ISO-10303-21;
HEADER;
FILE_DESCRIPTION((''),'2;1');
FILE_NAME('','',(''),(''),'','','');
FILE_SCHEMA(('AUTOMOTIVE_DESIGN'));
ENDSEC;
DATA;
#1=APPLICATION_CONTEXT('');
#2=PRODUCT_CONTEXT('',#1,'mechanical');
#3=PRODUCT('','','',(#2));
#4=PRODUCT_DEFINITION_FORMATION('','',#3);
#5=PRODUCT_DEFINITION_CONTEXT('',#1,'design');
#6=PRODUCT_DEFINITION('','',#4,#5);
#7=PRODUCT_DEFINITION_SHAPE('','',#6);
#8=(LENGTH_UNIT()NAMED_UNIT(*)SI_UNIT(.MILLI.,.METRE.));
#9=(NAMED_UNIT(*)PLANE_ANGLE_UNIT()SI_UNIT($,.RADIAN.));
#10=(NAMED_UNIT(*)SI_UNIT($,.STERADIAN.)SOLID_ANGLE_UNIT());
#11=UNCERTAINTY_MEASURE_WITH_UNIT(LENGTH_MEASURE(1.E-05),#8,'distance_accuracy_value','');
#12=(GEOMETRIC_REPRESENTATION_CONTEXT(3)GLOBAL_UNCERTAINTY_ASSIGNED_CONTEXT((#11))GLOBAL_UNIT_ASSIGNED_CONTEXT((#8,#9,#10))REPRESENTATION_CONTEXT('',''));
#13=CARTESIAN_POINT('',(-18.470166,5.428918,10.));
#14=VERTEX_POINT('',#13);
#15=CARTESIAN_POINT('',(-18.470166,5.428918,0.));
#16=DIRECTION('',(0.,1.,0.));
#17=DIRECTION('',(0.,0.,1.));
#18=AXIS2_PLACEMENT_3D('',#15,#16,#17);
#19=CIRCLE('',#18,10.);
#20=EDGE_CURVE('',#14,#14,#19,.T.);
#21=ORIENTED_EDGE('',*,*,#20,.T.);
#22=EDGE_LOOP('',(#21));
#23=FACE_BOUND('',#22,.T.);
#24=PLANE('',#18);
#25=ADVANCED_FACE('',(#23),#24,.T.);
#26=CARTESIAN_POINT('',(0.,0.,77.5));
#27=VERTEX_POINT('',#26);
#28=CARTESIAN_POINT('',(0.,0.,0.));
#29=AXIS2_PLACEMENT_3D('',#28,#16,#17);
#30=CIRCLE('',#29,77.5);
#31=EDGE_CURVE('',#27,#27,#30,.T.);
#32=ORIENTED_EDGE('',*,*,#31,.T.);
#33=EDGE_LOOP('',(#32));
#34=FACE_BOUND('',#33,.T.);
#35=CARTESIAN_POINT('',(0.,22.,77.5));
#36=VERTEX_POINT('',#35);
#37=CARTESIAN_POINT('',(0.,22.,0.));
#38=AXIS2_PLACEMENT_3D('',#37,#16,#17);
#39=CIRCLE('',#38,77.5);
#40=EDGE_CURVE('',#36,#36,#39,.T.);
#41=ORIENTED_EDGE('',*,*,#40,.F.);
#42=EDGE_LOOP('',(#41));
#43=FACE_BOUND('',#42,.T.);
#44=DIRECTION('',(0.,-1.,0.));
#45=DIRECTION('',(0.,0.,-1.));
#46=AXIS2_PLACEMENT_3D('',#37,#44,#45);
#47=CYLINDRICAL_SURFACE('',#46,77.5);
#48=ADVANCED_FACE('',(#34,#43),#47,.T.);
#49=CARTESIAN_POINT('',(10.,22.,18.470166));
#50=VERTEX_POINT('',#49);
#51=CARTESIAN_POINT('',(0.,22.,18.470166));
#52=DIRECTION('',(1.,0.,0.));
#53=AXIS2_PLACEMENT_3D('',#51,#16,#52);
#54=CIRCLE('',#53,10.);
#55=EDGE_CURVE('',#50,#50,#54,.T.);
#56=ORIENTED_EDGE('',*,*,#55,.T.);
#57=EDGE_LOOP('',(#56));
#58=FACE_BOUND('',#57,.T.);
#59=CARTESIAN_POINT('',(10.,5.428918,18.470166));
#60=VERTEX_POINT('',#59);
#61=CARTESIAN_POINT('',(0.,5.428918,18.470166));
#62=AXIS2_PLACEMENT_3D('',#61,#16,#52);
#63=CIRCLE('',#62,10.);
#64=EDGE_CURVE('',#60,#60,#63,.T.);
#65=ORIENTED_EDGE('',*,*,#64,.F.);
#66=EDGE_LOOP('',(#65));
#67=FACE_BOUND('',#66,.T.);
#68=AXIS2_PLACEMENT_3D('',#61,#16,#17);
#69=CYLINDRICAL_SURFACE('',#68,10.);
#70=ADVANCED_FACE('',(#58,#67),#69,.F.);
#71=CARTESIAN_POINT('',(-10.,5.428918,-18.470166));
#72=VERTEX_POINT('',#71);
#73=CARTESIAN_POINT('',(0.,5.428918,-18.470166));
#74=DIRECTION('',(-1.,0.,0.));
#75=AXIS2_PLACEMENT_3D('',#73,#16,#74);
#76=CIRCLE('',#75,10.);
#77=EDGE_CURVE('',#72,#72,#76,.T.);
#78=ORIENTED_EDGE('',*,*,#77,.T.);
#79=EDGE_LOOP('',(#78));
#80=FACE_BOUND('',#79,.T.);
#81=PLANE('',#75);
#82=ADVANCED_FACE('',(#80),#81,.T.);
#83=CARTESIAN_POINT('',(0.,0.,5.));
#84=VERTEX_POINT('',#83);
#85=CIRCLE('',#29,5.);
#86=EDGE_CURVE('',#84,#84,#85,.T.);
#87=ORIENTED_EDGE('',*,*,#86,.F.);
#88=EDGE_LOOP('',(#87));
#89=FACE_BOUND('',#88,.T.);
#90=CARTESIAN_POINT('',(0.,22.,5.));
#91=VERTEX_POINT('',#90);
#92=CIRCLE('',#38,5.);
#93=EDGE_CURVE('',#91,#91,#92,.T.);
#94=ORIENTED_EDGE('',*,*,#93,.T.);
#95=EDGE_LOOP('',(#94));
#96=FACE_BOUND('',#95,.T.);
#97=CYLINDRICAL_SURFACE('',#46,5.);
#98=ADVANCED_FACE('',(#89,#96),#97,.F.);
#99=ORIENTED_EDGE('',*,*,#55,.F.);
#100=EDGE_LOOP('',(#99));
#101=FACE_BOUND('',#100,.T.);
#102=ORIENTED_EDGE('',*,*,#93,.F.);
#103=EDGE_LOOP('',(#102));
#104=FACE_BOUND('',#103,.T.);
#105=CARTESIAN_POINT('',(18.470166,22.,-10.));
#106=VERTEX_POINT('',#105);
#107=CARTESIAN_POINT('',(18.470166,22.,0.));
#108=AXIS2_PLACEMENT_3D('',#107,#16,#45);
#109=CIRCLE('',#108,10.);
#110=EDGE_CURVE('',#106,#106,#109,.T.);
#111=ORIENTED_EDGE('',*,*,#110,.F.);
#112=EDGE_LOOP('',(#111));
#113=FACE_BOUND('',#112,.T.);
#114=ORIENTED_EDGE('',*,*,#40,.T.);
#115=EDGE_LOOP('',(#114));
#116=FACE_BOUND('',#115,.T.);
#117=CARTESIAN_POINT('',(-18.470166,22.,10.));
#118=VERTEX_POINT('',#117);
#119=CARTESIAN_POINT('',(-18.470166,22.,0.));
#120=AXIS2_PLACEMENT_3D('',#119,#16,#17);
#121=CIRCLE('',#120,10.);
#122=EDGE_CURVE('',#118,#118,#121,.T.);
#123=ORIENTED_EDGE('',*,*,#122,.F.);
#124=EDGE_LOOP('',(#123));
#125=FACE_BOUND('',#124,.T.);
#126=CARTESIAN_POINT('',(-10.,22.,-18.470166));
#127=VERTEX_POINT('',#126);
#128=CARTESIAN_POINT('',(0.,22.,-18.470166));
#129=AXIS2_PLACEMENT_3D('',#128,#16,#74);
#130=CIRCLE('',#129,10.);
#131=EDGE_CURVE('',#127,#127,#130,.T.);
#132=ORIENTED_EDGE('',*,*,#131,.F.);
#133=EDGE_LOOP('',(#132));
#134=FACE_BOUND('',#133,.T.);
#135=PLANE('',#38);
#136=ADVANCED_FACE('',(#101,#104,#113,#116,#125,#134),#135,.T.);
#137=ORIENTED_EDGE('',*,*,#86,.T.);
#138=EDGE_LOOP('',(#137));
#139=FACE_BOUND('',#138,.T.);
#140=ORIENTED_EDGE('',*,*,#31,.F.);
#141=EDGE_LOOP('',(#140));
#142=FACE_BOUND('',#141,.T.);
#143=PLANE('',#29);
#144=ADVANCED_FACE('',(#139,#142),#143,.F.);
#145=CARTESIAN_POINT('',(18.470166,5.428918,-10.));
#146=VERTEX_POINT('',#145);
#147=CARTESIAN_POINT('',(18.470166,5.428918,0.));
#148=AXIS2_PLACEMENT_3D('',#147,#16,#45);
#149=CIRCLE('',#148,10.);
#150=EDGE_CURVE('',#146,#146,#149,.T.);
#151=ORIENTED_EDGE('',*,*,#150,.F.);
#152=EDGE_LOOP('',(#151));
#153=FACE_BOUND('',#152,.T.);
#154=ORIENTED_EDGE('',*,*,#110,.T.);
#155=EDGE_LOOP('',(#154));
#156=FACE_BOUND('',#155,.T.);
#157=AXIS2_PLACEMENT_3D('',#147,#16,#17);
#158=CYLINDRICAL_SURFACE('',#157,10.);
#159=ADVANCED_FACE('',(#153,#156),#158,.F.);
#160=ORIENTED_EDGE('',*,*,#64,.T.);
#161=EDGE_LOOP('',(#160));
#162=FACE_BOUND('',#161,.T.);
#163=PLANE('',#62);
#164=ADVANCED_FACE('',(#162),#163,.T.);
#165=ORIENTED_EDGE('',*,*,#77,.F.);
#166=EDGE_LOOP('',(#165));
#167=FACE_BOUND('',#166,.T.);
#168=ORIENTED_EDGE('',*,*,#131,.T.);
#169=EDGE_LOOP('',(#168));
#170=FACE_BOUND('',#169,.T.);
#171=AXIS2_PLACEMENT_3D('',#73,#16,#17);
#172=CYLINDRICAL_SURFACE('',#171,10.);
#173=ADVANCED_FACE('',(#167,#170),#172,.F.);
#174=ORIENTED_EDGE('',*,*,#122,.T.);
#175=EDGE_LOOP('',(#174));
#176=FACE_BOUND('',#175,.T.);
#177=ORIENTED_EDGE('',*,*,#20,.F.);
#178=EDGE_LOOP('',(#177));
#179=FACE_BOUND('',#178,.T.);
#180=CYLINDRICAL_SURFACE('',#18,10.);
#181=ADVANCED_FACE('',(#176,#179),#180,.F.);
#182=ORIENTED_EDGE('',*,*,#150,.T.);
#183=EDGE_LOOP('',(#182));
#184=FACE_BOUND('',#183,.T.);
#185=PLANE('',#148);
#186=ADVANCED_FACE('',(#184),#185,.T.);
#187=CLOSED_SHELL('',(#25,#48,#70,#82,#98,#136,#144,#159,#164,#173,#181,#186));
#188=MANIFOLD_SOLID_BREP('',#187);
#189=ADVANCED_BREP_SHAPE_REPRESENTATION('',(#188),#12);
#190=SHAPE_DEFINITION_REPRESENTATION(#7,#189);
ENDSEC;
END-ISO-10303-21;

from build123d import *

# Parameters (mm, degrees)
SKETCH1_R           = 77.5
BOSS_EXTRUDE1_DEPTH = 22
SKETCH2_R           = 5
CUT_EXTRUDE1_DEPTH  = 112.787745303
SKETCH3_R           = 10
CUT_EXTRUDE2_DEPTH  = 16.571082055
CIRPATTERN1_COUNT   = 4


with BuildPart() as part:
    # Sketch1 → Boss-Extrude1 (new body)
    with BuildSketch(Plane(origin=(0, 0, 0), x_dir=(1, 0, 0), z_dir=(0, 1, 0))):
        Circle(SKETCH1_R)
    extrude(amount=BOSS_EXTRUDE1_DEPTH)

    # Sketch2 → Cut-Extrude1 (cut, through all)
    with BuildSketch(Plane(origin=(0, 0, 0), x_dir=(1, 0, 0), z_dir=(0, 1, 0))):
        Circle(SKETCH2_R)
    extrude(amount=CUT_EXTRUDE1_DEPTH, mode=Mode.SUBTRACT)

    # Sketch3 → Cut-Extrude2 (cut)
    with BuildSketch(Plane(origin=(0, 22, 0), x_dir=(1, 0, 0), z_dir=(0, 1, 0))):
        with Locations((-18.470166118, 0)):
            Circle(SKETCH3_R)
    cut_extrude2 = extrude(amount=-CUT_EXTRUDE2_DEPTH, mode=Mode.SUBTRACT)

    # CirPattern1: Cut-Extrude2 ×4 about axis
    cirpattern1_axis = Axis((0, 0, 0), (0, 1, 0))
    for i in range(1, CIRPATTERN1_COUNT):
        add(cut_extrude2.rotate(cirpattern1_axis, i * 360 / CIRPATTERN1_COUNT), mode=Mode.SUBTRACT)


solid = part.part
